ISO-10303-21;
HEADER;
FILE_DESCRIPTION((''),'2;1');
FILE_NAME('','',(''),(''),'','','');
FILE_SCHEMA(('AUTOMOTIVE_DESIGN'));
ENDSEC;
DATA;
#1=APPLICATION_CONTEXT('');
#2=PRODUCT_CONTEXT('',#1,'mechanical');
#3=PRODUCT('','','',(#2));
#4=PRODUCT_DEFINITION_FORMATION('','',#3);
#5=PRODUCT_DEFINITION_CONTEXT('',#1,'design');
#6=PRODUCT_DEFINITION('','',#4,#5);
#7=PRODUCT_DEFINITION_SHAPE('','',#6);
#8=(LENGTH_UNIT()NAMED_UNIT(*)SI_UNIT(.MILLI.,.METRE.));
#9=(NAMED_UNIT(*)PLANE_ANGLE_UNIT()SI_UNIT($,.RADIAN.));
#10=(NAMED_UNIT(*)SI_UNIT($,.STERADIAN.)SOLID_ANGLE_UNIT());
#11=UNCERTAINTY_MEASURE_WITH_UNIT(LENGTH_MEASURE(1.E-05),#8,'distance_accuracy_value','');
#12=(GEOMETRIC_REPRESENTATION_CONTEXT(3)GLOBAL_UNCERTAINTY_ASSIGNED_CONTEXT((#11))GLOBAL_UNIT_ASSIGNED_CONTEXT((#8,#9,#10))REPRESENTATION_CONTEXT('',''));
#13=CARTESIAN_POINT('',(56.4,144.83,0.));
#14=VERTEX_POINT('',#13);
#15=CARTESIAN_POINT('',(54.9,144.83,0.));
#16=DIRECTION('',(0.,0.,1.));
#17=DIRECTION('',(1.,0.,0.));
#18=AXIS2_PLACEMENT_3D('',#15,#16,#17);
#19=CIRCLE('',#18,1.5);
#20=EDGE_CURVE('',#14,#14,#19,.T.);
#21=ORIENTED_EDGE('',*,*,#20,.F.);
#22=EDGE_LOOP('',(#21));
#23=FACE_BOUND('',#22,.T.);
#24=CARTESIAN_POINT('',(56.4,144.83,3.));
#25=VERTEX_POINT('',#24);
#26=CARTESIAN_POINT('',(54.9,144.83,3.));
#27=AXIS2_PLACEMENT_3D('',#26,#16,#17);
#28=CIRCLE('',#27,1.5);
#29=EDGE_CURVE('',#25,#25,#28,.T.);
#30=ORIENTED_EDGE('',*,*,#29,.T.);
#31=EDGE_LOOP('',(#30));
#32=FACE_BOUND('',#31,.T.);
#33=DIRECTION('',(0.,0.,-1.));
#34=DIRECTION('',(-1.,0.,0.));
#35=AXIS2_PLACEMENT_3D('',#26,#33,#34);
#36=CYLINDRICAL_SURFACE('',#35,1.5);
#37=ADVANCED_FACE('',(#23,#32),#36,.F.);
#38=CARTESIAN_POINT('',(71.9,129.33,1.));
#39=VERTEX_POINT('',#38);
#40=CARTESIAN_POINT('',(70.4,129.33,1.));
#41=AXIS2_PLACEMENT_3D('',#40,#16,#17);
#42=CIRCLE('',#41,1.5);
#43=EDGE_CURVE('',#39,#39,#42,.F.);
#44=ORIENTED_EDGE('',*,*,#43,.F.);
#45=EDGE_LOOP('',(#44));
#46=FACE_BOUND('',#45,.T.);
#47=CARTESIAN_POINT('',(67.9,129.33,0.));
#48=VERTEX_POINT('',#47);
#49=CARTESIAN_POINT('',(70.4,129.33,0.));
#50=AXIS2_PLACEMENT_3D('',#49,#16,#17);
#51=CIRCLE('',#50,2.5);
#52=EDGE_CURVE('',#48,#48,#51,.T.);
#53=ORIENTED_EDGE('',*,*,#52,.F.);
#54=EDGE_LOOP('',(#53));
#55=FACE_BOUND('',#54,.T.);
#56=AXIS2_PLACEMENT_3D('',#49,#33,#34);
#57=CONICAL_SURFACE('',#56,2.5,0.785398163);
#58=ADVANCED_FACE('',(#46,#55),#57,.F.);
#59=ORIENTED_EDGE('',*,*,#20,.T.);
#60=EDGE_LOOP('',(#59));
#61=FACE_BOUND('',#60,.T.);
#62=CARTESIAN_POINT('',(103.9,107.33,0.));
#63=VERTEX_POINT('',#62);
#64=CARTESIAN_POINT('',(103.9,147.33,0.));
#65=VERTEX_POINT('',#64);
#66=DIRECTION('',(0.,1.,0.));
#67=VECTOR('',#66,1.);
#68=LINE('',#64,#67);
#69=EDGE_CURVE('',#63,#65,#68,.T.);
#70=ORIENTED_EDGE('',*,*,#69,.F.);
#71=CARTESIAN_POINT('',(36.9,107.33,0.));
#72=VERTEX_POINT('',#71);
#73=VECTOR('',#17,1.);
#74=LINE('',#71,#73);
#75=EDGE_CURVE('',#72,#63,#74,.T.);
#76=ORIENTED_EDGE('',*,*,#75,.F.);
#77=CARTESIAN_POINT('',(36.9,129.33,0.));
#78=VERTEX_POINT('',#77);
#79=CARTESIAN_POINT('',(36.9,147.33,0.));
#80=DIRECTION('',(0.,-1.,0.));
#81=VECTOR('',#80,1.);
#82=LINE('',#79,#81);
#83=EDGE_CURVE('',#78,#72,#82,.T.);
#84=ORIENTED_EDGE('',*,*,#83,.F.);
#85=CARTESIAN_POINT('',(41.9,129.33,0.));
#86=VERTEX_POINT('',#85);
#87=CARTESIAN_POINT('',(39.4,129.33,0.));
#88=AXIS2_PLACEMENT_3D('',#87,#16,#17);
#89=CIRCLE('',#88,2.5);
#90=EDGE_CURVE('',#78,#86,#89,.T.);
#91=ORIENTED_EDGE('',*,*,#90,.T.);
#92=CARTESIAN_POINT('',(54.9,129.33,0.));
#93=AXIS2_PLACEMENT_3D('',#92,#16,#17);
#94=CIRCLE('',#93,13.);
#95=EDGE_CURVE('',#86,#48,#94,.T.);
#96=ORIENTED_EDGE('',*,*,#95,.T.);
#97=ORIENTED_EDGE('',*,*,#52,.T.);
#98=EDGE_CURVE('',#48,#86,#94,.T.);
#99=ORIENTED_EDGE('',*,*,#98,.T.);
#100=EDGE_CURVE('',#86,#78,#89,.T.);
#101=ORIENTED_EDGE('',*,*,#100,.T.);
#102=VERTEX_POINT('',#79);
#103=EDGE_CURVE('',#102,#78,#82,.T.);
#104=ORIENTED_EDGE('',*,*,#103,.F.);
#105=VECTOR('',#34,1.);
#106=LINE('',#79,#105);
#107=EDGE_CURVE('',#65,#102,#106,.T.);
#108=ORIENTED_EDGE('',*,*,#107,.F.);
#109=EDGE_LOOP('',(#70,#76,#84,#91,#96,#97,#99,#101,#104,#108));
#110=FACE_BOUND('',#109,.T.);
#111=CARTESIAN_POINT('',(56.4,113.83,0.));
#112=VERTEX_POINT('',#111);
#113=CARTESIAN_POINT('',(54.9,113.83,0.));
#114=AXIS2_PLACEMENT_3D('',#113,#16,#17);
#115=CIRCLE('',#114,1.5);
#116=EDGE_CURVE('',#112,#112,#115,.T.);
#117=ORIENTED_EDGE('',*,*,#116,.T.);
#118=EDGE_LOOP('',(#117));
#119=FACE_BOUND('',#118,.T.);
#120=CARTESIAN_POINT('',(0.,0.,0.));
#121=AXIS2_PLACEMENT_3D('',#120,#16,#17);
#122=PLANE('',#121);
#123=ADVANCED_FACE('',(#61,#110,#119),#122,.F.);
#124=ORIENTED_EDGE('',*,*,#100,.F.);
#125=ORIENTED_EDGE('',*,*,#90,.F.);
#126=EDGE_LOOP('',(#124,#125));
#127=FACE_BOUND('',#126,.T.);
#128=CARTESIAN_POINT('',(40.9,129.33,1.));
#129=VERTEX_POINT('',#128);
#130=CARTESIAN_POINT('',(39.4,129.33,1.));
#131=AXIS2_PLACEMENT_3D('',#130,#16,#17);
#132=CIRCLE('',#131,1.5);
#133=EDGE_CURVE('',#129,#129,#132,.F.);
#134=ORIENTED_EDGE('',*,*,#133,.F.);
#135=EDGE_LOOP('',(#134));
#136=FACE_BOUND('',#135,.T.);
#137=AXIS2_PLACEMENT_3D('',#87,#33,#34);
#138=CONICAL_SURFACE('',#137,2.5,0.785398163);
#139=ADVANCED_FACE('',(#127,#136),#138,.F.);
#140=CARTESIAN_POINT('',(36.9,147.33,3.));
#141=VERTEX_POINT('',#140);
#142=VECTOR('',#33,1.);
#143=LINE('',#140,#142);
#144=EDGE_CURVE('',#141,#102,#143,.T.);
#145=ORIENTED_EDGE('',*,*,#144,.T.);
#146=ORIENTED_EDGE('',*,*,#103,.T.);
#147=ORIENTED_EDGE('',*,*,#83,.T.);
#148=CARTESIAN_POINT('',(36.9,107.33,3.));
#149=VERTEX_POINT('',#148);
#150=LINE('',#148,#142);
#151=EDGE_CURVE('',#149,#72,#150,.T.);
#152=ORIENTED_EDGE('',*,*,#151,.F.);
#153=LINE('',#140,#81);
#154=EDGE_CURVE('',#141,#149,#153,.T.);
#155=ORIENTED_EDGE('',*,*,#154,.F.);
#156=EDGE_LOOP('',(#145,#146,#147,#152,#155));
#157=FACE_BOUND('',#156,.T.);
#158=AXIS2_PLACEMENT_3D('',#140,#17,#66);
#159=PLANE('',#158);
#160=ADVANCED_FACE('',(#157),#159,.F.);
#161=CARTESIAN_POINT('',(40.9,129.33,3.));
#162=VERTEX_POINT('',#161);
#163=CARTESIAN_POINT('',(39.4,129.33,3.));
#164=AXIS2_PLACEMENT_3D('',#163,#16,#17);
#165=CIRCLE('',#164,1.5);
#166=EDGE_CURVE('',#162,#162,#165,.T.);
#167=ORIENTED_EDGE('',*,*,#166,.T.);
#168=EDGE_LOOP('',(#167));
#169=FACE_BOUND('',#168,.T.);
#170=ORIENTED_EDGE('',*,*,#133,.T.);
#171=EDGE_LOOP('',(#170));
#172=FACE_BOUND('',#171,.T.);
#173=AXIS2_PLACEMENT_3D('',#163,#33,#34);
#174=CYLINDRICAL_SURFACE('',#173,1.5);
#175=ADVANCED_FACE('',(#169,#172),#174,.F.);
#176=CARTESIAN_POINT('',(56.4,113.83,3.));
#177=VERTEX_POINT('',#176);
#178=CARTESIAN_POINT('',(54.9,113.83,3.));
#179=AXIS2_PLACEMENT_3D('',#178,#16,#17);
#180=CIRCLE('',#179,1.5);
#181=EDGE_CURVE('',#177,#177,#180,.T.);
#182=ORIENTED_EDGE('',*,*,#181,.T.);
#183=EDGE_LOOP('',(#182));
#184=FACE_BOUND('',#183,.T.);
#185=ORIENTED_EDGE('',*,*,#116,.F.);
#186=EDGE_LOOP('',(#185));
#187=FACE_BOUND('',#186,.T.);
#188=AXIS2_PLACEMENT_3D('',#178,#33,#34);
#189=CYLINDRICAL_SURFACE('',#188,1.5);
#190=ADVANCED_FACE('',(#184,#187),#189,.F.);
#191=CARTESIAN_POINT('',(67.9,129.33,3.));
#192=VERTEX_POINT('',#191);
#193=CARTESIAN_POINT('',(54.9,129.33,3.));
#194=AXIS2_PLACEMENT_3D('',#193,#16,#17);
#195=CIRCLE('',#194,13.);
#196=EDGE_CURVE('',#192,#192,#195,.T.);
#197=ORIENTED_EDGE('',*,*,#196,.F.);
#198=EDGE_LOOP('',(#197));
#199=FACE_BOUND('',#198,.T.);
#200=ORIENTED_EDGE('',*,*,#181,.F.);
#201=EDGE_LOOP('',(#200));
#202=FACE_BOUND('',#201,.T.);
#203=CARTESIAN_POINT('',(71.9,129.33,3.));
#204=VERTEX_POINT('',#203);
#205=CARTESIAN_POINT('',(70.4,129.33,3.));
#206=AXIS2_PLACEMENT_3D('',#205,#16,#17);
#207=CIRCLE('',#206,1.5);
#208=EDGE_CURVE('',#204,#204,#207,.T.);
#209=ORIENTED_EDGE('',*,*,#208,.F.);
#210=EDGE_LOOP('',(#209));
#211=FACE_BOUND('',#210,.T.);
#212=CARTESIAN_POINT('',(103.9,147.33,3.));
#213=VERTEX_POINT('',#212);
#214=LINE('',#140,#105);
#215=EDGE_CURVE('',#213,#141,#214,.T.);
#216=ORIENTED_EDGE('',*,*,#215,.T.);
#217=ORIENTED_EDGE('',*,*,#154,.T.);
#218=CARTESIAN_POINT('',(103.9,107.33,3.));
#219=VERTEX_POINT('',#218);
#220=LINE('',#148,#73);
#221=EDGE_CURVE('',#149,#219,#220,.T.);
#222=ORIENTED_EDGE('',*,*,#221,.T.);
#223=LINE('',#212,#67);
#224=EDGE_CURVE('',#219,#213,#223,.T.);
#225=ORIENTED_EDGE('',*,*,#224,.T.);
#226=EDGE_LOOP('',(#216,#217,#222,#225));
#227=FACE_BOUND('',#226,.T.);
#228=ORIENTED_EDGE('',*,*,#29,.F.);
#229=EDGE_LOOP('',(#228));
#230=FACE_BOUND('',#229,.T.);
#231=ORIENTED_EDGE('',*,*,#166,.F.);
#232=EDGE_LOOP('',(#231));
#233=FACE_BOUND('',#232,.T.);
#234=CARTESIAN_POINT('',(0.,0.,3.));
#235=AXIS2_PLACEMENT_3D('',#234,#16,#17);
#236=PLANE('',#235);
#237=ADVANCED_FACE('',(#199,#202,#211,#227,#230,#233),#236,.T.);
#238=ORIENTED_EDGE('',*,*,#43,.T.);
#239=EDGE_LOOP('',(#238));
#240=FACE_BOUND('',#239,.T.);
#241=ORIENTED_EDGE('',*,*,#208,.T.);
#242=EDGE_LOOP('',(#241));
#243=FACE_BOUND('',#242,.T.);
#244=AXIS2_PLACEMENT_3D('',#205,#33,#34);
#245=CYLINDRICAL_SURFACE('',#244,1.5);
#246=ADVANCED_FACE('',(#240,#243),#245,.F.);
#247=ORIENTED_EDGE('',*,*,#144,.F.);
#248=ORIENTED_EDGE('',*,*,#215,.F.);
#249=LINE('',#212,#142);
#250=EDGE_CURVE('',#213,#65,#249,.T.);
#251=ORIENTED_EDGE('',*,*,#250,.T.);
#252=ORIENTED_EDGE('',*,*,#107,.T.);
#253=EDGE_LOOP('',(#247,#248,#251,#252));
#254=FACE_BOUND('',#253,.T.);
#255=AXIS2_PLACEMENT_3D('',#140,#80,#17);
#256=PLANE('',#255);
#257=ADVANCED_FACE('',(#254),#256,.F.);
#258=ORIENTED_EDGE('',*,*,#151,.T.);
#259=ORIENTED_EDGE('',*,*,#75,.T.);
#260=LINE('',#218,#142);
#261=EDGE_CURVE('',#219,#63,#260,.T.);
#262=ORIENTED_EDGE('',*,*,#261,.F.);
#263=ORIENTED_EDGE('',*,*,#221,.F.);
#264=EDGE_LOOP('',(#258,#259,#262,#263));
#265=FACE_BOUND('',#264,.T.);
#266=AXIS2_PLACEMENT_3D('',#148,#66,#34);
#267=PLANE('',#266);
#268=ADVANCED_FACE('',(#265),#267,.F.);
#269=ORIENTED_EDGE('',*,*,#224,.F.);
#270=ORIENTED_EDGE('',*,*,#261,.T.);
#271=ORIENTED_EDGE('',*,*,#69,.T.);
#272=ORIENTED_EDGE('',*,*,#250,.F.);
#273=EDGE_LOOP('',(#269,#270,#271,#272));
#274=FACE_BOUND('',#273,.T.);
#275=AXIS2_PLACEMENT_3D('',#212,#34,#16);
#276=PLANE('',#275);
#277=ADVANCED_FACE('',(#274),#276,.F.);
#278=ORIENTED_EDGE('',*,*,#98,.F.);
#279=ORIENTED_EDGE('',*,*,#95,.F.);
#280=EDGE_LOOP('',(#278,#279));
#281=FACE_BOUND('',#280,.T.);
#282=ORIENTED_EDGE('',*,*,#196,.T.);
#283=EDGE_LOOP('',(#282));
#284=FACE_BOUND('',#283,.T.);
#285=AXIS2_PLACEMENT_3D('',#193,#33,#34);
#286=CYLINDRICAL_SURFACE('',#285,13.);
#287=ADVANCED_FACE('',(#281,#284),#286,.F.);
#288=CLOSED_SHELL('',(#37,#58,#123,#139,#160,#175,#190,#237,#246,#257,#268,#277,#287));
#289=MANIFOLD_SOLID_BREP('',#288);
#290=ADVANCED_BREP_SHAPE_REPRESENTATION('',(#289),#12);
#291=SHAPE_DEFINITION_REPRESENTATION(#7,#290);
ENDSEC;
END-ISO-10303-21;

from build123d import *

# Parameters (mm, degrees)
SKETCH1_W           = 67
SKETCH1_H           = 40
SKETCH1_R           = 13
SKETCH1_R_2         = 1.5
BOSS_EXTRUDE1_DEPTH = 3
CHAMFER1_SIZE       = 1


with BuildPart() as part:
    # Sketch1 → Boss-Extrude1 (new body)
    with BuildSketch(Plane.XY):
        with Locations((70.4, 127.33)):
            Rectangle(SKETCH1_W, SKETCH1_H)
        with Locations((54.9, 129.33)):
            Circle(SKETCH1_R, mode=Mode.SUBTRACT)
        with Locations((39.4, 129.33)):
            Circle(SKETCH1_R_2, mode=Mode.SUBTRACT)
        with Locations((54.9, 144.83)):
            Circle(SKETCH1_R_2, mode=Mode.SUBTRACT)
        with Locations((70.4, 129.33)):
            Circle(SKETCH1_R_2, mode=Mode.SUBTRACT)
        with Locations((54.9, 113.83)):
            Circle(SKETCH1_R_2, mode=Mode.SUBTRACT)
    extrude(amount=BOSS_EXTRUDE1_DEPTH)

    # Chamfer1
    chamfer1_edges = [part.edges().sort_by_distance(p)[0] for p in [
        (37.9, 129.33, 0),
        (68.9, 129.33, 0),
    ]]
    chamfer(chamfer1_edges, length=CHAMFER1_SIZE - 0.0001)  # a hair under: the kernel refuses the full size


solid = part.part
